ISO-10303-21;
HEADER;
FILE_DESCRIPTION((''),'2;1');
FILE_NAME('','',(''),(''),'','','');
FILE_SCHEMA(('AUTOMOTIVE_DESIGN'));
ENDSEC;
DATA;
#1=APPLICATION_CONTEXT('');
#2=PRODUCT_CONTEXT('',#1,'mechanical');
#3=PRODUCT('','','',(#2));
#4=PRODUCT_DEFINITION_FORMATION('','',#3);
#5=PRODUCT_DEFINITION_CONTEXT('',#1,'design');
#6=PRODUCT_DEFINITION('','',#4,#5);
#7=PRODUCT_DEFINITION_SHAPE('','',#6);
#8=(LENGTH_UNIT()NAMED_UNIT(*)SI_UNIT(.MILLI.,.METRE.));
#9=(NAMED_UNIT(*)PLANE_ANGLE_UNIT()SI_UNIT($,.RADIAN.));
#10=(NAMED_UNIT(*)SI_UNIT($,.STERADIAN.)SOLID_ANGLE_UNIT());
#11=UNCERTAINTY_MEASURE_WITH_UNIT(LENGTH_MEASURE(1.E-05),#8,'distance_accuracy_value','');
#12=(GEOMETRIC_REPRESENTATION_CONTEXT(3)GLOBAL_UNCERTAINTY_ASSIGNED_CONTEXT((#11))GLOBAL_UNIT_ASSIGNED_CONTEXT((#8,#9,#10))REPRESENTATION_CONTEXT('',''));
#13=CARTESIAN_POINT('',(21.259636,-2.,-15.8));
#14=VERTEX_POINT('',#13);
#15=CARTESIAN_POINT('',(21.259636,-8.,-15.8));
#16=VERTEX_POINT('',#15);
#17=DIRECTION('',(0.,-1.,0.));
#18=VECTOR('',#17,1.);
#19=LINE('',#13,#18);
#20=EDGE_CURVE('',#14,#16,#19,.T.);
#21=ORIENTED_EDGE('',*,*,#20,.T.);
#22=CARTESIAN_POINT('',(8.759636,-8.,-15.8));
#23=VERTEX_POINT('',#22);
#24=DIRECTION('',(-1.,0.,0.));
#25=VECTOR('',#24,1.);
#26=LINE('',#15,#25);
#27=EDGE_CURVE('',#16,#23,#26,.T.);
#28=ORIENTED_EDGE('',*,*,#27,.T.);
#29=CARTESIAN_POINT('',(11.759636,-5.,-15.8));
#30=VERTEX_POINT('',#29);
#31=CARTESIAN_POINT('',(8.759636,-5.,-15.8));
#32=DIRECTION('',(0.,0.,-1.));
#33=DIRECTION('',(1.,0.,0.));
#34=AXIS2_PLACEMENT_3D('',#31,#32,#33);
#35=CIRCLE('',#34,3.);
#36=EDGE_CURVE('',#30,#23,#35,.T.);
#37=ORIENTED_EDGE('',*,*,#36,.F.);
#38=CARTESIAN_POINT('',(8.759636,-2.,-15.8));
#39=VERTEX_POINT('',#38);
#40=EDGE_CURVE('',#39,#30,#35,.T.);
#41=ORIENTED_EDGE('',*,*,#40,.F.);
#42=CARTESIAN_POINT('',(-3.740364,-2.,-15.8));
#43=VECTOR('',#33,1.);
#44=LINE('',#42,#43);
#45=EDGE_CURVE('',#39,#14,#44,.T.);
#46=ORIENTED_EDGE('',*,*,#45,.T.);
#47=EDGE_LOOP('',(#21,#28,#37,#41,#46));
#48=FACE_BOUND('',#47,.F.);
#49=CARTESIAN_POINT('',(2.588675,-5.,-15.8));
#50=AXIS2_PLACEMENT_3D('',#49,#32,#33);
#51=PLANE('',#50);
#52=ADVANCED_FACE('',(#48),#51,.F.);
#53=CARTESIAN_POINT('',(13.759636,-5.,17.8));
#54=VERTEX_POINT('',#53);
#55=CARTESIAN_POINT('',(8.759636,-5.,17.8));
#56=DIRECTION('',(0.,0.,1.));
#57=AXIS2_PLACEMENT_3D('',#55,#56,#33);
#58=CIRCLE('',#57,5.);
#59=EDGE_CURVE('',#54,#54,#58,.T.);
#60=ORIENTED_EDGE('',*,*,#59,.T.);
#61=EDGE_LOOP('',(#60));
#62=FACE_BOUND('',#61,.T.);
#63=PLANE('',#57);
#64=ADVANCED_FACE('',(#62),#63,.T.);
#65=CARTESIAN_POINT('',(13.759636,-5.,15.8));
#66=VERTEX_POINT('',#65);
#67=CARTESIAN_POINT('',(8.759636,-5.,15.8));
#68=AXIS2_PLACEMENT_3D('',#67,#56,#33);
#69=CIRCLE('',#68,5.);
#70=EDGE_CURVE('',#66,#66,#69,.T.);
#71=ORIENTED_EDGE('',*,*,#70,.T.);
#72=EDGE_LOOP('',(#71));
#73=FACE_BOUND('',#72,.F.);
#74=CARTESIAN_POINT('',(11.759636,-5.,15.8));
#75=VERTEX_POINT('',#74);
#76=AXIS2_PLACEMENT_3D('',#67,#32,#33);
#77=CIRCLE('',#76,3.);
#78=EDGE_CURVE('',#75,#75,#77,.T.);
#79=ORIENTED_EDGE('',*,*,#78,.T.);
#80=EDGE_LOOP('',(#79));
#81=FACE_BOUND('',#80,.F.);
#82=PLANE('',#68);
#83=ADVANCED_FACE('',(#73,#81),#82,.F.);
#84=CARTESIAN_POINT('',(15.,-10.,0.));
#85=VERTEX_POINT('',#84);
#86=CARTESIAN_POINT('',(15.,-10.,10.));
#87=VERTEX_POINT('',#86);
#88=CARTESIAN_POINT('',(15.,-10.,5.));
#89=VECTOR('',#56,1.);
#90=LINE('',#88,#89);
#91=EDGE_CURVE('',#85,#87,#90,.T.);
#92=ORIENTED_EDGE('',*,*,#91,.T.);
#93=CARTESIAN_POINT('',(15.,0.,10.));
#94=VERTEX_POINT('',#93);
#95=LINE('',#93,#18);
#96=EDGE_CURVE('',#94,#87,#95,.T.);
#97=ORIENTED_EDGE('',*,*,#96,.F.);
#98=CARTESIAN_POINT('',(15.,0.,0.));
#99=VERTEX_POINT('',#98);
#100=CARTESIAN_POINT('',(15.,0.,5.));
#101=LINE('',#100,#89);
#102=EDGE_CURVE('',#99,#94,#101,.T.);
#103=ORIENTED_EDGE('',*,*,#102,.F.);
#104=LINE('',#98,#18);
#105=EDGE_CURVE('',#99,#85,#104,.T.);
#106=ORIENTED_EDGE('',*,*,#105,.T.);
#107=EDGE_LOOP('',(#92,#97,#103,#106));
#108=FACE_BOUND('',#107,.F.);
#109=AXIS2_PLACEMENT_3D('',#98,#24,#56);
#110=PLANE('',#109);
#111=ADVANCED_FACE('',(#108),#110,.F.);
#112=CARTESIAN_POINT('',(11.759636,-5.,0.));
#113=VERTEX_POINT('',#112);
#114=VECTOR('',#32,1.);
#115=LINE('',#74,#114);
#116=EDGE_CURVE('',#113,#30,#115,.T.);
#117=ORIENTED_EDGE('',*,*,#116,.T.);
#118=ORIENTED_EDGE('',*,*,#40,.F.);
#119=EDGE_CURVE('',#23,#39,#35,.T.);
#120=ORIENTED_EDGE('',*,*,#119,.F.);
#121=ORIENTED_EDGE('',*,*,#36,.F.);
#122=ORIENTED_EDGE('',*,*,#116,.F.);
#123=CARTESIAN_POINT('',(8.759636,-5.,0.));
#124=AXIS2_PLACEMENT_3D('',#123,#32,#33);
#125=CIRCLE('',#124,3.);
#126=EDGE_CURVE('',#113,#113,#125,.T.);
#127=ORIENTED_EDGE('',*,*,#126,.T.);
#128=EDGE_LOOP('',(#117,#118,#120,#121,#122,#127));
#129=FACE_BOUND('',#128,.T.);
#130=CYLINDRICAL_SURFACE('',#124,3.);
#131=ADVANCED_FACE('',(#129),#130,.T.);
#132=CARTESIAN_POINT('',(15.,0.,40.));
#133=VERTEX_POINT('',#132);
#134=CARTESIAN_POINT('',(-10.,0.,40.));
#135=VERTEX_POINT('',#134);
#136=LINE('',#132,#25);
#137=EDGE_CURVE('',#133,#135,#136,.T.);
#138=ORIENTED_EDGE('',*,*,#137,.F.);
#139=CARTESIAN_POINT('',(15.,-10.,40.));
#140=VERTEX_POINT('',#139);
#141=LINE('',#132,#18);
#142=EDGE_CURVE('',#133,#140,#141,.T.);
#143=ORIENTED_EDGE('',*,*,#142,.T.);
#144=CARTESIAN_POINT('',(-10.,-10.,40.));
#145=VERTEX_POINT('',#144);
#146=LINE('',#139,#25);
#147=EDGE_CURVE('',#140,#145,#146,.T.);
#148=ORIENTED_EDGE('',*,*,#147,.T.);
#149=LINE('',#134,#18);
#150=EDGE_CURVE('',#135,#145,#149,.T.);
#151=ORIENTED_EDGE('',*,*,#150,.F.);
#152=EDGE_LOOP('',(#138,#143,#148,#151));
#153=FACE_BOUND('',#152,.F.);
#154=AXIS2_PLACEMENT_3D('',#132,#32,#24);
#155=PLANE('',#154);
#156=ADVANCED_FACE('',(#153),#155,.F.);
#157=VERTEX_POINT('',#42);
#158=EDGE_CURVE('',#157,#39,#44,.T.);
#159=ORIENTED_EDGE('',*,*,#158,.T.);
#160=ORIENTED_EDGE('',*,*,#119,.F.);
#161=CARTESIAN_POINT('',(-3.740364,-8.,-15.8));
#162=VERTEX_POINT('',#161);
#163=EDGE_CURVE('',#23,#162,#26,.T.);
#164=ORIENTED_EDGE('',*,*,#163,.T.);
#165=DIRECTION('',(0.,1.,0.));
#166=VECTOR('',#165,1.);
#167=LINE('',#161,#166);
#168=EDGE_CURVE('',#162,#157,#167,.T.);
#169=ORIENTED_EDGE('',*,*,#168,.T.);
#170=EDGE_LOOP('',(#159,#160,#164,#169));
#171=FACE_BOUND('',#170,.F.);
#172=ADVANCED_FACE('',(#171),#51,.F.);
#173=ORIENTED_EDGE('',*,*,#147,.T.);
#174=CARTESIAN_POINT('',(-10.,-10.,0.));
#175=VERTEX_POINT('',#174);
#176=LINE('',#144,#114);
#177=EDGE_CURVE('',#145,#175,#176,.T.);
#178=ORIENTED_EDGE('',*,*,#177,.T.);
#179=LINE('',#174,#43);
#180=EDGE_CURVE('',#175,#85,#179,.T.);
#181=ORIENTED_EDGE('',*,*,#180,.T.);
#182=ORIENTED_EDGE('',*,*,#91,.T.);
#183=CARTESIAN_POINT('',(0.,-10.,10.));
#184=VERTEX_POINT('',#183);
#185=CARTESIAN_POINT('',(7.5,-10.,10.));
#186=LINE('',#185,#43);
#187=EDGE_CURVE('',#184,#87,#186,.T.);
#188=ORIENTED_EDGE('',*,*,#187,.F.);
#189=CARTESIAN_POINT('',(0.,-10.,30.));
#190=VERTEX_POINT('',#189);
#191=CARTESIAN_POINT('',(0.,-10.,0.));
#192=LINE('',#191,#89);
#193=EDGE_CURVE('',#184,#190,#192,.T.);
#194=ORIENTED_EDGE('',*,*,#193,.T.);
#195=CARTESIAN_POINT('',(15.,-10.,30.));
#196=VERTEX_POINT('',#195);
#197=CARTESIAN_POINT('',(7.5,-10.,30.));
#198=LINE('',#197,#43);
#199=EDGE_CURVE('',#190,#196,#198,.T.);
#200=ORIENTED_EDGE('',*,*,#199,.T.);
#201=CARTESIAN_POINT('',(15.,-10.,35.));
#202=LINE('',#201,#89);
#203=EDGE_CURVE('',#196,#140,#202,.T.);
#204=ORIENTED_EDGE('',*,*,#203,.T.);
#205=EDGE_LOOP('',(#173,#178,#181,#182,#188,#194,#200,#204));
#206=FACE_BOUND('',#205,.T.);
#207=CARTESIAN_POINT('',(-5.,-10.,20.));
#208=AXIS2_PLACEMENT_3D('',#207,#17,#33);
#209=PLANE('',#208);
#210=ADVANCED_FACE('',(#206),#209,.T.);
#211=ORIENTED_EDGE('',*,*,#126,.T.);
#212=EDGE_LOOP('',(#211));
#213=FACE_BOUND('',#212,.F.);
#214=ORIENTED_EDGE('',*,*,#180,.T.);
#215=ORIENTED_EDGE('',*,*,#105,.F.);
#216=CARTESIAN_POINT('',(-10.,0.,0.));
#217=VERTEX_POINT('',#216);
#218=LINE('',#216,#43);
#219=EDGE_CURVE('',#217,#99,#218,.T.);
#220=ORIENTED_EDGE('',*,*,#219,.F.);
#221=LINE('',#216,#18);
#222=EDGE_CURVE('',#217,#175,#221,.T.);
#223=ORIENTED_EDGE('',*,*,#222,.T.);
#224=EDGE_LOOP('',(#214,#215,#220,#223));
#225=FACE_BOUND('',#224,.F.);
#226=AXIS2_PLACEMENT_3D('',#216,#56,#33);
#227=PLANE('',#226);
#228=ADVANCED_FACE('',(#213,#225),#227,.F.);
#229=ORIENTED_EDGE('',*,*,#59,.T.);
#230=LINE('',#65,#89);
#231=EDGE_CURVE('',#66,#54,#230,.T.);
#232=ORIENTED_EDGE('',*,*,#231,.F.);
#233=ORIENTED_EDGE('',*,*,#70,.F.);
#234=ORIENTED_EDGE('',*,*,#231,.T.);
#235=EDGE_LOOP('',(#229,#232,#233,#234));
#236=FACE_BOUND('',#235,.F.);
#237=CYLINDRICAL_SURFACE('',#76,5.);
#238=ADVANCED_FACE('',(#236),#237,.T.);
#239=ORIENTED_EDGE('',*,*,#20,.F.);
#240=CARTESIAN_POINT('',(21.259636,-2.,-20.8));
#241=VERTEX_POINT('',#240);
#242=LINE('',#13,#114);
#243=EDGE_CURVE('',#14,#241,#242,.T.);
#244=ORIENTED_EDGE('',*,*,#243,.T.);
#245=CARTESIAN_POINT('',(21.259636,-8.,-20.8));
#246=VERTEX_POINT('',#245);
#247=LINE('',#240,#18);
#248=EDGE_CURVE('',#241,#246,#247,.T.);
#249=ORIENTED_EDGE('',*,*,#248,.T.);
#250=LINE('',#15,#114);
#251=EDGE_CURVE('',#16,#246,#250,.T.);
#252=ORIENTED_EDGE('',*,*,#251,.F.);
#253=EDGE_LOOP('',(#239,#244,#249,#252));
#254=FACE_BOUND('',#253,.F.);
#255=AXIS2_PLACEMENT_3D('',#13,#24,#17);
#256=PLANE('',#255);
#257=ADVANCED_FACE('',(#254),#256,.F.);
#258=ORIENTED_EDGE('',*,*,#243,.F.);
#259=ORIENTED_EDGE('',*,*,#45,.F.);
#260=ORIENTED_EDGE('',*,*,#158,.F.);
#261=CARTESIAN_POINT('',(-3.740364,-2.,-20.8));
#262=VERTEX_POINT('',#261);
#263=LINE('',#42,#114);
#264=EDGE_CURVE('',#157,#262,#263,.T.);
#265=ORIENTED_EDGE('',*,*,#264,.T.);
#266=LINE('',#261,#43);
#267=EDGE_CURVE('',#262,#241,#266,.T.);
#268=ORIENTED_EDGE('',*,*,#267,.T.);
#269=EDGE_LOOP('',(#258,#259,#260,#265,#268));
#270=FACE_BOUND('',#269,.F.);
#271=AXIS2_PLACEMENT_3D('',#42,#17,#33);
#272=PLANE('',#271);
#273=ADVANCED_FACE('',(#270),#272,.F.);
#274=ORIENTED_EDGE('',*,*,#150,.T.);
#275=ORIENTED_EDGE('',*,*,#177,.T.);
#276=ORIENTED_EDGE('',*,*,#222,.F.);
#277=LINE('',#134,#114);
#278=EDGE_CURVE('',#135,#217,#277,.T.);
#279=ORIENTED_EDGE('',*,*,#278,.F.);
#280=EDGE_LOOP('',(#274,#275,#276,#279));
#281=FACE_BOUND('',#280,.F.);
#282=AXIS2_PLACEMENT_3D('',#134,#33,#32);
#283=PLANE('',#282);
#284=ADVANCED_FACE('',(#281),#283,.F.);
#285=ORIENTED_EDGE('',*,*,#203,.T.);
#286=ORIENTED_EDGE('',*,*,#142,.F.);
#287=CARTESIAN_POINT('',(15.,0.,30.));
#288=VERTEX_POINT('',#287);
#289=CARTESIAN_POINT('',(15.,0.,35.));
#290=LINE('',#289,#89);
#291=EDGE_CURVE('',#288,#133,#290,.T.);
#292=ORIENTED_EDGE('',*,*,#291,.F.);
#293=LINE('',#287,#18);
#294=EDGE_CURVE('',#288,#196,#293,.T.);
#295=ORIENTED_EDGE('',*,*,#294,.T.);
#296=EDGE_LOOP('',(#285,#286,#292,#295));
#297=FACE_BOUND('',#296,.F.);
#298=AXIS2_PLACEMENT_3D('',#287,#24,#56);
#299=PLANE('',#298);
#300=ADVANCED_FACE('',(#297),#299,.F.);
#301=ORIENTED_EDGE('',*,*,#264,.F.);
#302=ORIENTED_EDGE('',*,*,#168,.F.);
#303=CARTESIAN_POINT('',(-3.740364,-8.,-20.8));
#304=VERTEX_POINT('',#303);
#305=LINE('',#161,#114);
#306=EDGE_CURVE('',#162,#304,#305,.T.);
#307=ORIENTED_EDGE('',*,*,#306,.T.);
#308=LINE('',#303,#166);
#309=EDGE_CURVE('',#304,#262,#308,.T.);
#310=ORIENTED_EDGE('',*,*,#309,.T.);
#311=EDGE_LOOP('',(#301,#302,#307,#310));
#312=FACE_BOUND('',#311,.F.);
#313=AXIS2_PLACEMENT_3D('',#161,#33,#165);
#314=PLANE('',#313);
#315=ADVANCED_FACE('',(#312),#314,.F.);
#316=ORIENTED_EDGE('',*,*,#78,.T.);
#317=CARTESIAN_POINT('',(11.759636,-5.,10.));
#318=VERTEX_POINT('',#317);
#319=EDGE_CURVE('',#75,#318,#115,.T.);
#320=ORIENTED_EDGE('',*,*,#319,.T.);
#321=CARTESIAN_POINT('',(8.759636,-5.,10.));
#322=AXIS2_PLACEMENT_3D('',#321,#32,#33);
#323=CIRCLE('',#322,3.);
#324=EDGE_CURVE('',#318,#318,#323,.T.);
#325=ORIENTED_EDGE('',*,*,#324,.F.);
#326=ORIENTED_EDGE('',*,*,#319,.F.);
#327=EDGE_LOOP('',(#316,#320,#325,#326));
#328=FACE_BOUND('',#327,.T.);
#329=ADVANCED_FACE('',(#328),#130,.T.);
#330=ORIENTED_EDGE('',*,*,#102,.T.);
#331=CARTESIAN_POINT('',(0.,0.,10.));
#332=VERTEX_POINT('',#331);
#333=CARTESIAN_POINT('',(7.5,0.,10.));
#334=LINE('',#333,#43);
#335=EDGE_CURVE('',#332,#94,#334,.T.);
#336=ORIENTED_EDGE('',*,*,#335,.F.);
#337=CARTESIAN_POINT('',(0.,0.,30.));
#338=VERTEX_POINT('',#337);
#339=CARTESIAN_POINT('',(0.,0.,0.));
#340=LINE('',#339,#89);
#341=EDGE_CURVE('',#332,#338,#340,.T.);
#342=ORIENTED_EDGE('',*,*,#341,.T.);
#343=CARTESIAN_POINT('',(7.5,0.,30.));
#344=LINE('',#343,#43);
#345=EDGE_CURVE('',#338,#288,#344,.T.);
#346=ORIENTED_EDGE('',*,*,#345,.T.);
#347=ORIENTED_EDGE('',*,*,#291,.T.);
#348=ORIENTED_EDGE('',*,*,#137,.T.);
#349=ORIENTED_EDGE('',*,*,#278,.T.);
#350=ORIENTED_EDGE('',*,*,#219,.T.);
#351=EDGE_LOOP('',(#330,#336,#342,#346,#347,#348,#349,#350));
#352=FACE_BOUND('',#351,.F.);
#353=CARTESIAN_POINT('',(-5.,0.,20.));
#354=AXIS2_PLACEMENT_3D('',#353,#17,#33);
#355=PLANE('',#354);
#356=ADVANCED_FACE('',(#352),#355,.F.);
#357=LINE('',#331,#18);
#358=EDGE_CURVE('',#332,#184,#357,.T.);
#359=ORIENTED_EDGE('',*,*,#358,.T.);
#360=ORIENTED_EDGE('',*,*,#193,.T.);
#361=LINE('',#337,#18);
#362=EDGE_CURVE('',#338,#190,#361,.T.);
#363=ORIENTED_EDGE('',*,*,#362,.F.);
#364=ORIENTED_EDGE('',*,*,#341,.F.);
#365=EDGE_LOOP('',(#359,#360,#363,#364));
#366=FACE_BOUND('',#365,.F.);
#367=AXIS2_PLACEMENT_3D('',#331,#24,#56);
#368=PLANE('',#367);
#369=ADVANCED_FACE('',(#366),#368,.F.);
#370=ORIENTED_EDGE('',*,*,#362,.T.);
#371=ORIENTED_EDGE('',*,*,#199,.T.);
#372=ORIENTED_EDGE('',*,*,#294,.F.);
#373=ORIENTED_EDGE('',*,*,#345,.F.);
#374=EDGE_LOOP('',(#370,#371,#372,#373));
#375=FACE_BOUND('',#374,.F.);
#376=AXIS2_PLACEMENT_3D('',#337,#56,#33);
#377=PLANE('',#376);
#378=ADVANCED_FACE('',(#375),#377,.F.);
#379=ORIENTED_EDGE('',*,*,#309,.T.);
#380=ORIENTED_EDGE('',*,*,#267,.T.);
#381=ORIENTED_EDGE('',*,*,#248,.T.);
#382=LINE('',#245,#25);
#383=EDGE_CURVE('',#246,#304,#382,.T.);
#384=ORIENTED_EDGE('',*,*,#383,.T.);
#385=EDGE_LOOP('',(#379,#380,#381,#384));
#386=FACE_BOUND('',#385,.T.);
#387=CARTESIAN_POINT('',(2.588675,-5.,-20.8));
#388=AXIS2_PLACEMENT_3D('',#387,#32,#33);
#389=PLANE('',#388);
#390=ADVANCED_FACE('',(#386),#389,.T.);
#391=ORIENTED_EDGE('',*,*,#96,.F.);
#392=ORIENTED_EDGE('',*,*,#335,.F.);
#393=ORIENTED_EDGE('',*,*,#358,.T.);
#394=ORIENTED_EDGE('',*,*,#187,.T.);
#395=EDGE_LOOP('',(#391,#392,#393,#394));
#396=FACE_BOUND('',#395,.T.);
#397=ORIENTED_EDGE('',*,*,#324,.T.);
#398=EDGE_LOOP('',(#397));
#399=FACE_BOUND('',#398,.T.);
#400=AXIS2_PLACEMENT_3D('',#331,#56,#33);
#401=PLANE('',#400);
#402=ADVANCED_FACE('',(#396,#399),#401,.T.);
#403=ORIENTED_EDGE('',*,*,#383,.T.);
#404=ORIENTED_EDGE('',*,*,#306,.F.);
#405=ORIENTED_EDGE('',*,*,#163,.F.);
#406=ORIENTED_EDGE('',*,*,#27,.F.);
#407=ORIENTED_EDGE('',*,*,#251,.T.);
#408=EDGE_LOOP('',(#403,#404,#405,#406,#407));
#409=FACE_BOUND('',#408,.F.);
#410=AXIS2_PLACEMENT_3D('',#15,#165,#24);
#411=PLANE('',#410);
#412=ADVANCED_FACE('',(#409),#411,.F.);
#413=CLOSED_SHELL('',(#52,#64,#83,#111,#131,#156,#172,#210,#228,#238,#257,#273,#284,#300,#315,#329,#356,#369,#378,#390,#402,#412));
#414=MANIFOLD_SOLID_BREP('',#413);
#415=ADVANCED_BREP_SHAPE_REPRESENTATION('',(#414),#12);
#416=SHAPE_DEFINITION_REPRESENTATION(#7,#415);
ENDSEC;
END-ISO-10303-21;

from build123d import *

# Parameters (mm, degrees)
F0_W     = 15
F0_H     = 10
F1_DEPTH = 10
F2_R     = 3
F3_DEPTH = 15.8
F5_DEPTH = 5
F6_R     = 5
F6_R_2   = 3
F7_DEPTH = 2


with BuildPart() as f1:
    # F0 (on Front) → F1 (new body)
    with BuildSketch(Plane.XZ):
        Polygon((-10, 0), (0, 0), (0, 10), (0, 30), (0, 40), (-10, 40), align=None)
        with Locations((7.5, 5)):
            Rectangle(F0_W, F0_H)
        with Locations((7.5, 35)):
            Rectangle(F0_W, F0_H)
    extrude(amount=F1_DEPTH)

    # F2 (on face) → F3 (join, symmetric)
    with BuildSketch(Plane(origin=(0, 0, 0), x_dir=(1, 0, 0), z_dir=(0, 0, -1))):
        with Locations((8.7596364319, 5)):
            Circle(F2_R)
    extrude(amount=F3_DEPTH, both=True)

    # F4 (on face) → F5 (join)
    with BuildSketch(Plane(origin=(0, 0, -15.8), x_dir=(1, 0, 0), z_dir=(0, 0, -1))):
        with BuildLine():
            Line((-3.7403635681, 2), (8.7596364319, 2))
            ThreePointArc((8.7596364319, 2), (5.7596364319, 5), (8.7596364319, 8))
            Line((8.7596364319, 8), (-3.7403635681, 8))
            Line((-3.7403635681, 8), (-3.7403635681, 2))
        make_face()
        with BuildLine():
            Line((8.7596364319, 2), (21.2596364319, 2))
            Line((21.2596364319, 2), (21.2596364319, 8))
            Line((21.2596364319, 8), (8.7596364319, 8))
            ThreePointArc((8.7596364319, 8), (10.8809567755, 7.1213203436), (11.7596364319, 5))
            ThreePointArc((11.7596364319, 5), (10.8809567755, 2.8786796564), (8.7596364319, 2))
        make_face()
        with BuildLine():
            ThreePointArc((8.7596364319, 8), (5.7596364319, 5), (8.7596364319, 2))
            ThreePointArc((8.7596364319, 2), (10.8809567755, 2.8786796564), (11.7596364319, 5))
            ThreePointArc((11.7596364319, 5), (10.8809567755, 7.1213203436), (8.7596364319, 8))
        make_face()
    extrude(amount=F5_DEPTH)

    # F6 (on face) → F7 (join)
    with BuildSketch(Plane.XY.offset(15.8)):
        with Locations((8.7596364319, -5)):
            Circle(F6_R)
        with Locations((8.7596364319, -5)):
            Circle(F6_R_2, mode=Mode.SUBTRACT)
        with Locations((8.7596364319, -5)):
            Circle(F6_R_2)
    extrude(amount=F7_DEPTH)


solid = f1.part
